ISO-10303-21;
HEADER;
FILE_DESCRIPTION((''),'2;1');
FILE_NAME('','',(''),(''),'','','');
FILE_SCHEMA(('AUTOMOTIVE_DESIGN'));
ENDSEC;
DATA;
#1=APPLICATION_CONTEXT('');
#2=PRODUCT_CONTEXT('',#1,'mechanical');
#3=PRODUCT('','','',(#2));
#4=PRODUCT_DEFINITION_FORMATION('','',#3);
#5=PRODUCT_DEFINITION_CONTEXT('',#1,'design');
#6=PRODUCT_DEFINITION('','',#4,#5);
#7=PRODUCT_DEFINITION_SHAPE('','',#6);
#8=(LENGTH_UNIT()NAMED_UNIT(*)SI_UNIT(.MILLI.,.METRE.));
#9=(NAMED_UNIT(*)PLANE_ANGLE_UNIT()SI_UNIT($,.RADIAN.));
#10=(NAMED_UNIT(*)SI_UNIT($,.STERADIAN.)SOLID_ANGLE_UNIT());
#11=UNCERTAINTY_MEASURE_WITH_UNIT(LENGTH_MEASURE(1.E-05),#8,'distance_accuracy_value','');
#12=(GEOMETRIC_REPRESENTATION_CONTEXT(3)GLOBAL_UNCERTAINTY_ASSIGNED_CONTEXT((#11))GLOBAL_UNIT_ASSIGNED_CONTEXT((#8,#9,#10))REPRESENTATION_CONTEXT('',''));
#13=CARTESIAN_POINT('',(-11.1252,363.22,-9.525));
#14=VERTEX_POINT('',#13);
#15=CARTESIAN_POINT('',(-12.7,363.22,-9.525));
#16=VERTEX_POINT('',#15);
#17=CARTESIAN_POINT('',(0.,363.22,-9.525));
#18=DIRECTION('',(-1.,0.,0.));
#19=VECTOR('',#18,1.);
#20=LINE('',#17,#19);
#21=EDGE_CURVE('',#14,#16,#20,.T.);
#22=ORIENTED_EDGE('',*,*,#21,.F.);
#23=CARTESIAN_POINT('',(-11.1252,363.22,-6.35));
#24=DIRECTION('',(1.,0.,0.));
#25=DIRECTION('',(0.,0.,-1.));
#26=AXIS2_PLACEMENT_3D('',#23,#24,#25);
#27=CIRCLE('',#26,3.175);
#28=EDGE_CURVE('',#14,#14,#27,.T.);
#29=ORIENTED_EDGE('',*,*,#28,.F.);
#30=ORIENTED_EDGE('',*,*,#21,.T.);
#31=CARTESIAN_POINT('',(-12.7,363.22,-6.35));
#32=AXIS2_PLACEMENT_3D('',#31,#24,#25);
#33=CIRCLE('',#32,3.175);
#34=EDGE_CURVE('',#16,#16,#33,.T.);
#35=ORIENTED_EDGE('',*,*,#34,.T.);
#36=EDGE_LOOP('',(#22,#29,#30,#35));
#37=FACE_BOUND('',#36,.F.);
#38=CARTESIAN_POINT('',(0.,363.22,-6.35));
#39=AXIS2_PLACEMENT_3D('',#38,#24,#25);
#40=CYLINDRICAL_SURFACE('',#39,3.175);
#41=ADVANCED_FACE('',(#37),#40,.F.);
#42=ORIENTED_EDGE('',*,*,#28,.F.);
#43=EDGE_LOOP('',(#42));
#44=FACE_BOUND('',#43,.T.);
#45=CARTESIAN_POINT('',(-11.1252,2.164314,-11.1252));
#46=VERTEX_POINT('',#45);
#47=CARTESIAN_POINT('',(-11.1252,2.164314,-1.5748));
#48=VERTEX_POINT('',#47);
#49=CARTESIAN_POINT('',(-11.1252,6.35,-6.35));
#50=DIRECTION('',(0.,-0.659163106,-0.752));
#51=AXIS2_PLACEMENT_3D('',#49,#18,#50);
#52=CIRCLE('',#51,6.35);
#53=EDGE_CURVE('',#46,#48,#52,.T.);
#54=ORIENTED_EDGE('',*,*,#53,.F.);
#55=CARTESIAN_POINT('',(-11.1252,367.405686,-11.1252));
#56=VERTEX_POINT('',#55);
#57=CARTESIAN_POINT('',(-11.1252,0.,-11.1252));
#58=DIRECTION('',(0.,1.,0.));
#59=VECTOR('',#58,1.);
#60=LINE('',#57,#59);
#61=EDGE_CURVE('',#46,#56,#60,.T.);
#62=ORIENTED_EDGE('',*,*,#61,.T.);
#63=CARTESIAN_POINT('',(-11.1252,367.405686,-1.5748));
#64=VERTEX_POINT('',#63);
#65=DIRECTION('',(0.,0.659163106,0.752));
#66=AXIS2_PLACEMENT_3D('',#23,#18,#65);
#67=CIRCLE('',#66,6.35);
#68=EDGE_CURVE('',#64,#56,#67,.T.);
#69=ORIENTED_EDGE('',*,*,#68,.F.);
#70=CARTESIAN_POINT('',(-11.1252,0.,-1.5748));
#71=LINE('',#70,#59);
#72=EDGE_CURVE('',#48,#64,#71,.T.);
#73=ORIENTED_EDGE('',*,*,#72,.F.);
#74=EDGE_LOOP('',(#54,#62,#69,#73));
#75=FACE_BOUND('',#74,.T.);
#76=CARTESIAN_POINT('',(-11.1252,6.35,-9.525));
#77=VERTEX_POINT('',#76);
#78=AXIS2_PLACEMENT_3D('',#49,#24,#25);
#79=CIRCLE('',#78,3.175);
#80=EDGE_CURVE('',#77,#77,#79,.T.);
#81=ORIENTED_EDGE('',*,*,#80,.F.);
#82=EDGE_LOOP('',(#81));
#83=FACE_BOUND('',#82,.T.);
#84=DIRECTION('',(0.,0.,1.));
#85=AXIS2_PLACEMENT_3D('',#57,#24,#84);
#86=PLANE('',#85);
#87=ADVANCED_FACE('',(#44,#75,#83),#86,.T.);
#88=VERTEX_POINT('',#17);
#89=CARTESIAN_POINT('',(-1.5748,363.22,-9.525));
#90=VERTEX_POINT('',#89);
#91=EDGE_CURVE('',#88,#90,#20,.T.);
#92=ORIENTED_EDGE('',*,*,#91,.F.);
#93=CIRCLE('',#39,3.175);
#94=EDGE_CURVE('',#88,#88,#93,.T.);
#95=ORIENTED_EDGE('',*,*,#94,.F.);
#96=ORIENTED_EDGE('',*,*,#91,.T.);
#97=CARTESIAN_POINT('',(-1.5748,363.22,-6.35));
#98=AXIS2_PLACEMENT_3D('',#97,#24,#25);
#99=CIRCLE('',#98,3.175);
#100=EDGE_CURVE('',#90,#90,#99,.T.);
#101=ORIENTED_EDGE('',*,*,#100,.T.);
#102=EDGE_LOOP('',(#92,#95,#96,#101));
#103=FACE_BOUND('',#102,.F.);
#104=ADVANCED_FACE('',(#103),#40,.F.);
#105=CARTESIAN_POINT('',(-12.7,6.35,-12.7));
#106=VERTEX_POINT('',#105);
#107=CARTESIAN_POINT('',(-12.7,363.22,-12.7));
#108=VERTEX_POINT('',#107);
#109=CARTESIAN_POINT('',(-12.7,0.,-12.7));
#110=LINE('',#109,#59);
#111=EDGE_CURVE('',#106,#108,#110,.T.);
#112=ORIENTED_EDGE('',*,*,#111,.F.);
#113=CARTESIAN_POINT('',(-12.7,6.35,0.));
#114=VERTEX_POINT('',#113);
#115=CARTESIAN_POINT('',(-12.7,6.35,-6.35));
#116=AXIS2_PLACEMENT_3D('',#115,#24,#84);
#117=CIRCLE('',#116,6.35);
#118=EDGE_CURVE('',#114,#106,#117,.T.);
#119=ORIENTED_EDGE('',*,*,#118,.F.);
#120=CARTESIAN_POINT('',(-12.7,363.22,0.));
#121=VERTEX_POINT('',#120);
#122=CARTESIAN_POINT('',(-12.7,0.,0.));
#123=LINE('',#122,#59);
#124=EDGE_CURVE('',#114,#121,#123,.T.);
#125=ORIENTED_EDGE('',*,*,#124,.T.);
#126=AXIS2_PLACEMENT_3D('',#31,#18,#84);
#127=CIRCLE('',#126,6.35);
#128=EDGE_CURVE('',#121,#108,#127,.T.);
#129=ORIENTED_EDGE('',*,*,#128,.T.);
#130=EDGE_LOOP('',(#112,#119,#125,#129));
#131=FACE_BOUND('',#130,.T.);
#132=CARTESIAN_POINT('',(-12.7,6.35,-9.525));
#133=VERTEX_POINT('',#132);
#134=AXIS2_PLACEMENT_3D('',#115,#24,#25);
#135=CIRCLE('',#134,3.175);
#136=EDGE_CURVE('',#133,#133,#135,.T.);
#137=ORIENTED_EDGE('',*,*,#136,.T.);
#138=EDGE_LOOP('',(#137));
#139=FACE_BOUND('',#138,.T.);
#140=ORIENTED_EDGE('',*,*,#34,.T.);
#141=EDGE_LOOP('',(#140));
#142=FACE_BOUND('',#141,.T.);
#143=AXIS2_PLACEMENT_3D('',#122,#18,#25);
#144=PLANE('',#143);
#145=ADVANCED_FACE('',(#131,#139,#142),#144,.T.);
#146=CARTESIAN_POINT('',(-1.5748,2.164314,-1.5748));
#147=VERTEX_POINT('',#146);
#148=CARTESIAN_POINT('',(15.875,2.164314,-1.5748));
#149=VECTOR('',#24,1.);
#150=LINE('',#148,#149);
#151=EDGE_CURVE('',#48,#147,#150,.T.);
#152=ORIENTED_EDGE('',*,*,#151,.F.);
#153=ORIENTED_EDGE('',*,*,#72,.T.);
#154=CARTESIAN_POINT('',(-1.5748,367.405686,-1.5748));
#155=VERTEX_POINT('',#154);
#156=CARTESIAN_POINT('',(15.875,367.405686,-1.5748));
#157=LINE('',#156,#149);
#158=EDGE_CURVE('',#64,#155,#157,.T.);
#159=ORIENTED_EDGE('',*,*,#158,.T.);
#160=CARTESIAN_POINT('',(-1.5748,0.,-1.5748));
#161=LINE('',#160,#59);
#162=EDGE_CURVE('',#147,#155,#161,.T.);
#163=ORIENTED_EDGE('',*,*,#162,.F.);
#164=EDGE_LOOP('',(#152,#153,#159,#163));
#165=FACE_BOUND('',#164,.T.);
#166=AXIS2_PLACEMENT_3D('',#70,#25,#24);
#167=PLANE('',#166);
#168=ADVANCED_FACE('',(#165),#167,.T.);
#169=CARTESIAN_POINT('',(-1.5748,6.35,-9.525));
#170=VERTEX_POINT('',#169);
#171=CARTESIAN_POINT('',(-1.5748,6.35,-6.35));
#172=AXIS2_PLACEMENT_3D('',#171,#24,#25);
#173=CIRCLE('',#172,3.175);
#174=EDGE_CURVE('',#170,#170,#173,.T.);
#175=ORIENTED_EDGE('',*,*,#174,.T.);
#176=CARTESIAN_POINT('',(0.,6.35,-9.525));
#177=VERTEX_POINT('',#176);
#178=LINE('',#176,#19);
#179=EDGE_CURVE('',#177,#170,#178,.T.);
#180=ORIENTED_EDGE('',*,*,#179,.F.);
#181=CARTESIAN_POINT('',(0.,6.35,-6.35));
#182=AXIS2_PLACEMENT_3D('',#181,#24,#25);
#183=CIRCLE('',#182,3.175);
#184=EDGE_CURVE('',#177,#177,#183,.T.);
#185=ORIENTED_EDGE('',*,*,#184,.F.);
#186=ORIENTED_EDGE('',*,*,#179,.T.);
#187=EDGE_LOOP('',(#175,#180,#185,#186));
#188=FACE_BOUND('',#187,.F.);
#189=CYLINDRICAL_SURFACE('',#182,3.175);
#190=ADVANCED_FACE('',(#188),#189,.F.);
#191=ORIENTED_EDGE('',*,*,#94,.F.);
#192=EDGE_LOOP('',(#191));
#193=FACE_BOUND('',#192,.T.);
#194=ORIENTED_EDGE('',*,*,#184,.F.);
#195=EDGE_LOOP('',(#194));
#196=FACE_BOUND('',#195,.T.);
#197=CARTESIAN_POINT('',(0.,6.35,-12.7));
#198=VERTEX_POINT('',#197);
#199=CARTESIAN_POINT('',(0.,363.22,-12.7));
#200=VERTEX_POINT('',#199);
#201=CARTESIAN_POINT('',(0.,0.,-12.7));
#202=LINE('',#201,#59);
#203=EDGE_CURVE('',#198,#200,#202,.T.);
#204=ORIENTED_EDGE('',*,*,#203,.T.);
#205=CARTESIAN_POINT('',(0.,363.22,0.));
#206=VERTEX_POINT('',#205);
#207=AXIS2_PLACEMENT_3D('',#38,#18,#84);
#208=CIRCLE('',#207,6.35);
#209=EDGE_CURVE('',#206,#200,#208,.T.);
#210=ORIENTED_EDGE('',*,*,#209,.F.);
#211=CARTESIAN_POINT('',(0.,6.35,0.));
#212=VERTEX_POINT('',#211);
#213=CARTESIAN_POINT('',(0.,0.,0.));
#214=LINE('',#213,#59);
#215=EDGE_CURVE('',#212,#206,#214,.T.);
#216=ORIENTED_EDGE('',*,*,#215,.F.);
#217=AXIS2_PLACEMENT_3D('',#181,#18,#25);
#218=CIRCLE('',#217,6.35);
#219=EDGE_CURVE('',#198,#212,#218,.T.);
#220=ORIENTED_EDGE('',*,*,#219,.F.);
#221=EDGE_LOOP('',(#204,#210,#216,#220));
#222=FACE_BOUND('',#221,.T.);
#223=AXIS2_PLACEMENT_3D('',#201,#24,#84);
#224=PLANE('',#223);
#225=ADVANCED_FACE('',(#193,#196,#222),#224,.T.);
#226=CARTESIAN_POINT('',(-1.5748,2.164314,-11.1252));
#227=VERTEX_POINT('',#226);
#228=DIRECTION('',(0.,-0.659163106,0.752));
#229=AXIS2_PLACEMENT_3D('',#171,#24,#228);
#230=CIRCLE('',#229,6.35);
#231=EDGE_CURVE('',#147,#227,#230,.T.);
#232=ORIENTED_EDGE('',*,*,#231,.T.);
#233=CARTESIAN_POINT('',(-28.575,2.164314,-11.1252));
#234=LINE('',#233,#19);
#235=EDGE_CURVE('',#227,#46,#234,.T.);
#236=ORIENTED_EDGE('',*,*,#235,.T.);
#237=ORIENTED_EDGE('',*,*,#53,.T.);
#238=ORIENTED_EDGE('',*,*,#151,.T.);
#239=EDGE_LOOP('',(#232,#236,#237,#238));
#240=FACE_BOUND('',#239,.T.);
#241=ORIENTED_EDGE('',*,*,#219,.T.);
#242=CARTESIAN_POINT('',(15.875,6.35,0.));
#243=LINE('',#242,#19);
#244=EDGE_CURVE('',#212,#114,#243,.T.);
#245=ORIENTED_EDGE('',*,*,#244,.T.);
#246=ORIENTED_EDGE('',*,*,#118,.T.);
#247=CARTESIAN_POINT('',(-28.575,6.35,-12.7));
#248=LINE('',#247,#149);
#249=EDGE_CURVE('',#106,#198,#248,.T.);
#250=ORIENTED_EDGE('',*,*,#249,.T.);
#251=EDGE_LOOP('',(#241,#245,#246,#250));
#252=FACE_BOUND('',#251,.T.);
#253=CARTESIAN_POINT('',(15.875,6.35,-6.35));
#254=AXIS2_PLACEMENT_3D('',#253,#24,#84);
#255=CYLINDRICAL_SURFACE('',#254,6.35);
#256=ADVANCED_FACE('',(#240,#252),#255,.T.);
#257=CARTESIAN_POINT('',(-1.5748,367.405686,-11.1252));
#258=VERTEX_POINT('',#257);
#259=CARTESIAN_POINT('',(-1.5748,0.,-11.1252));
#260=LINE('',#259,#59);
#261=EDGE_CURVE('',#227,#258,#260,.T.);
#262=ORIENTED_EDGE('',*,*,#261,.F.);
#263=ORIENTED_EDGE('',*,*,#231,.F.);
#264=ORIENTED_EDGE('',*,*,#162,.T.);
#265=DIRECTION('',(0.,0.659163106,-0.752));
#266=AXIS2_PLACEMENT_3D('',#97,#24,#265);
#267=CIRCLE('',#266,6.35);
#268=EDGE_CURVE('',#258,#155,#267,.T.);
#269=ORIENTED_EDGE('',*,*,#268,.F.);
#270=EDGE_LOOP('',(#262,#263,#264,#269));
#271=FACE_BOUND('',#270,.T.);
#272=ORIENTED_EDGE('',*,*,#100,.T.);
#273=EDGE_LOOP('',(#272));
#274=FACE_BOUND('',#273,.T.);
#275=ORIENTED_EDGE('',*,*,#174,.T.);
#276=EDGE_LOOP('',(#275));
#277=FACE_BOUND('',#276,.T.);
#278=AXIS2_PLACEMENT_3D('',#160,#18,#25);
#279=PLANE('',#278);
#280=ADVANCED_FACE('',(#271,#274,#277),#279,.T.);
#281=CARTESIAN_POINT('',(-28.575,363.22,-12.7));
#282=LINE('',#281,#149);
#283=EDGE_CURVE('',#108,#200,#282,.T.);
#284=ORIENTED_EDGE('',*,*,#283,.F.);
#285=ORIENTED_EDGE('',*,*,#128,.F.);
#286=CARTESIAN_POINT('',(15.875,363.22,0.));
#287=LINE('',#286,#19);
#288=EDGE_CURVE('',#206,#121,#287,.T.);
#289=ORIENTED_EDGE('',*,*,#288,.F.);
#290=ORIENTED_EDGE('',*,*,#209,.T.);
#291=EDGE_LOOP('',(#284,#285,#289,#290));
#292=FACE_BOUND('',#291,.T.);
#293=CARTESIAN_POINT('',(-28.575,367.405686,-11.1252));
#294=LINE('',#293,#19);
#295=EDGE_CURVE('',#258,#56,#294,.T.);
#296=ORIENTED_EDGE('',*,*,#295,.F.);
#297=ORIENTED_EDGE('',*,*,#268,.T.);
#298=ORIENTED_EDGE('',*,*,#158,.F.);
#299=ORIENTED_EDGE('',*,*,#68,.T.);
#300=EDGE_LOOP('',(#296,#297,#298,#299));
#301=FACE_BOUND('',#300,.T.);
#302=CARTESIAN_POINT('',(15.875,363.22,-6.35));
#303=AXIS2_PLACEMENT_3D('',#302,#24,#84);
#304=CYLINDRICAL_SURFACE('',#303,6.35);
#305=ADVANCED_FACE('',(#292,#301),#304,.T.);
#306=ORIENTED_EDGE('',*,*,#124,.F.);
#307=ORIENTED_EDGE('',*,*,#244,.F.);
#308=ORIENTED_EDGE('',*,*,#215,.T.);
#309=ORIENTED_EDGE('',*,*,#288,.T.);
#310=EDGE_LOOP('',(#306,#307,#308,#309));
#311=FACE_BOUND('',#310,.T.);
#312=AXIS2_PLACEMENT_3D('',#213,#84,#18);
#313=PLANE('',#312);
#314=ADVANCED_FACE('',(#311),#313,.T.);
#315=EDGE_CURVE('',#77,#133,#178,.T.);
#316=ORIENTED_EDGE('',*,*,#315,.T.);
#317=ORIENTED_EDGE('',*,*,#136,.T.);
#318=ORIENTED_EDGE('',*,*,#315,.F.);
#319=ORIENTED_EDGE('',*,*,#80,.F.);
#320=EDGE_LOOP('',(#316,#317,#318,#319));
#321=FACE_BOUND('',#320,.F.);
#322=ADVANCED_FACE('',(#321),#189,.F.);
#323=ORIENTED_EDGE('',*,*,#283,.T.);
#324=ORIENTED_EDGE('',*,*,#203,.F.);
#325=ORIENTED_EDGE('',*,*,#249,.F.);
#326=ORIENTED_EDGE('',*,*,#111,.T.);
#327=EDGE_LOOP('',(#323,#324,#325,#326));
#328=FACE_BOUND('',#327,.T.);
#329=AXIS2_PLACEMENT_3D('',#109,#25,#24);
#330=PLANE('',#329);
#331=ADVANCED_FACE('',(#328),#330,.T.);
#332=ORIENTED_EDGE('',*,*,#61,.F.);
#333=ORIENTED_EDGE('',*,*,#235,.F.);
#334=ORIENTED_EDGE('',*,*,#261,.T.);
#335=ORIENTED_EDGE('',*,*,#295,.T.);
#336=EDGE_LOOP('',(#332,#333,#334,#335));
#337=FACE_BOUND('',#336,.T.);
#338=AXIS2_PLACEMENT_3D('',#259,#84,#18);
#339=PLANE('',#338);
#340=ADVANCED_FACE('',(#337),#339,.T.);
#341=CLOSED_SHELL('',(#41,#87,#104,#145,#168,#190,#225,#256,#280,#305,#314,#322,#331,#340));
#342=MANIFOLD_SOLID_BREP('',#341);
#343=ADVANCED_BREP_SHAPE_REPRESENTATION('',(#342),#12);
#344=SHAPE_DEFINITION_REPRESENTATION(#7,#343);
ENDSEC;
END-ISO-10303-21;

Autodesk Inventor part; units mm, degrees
ref_plane "YZ Plane" through (0, 0, 0) normal (1, 0, 0) x (0, 1, 0)
ref_plane "XZ Plane" through (0, 0, 0) normal (0, 1, 0) x (-1, 0, 0)
ref_plane "XY Plane" through (0, 0, 0) normal (0, 0, 1) x (1, 0, 0)
sketch "Sketch1" plane through (0, 0, 0) normal (0, 1, 0) x (-1, 0, 0)
  line L0 (0, 0) -> (12.7, 0)
  line L1 (12.7, 0) -> (12.7, -12.7)
  line L2 (12.7, -12.7) -> (0, -12.7)
  line L3 (0, -12.7) -> (0, 0)
  line L4 (11.1252, -1.5748) -> (1.5748, -1.5748)
  line L5 (1.5748, -1.5748) -> (1.5748, -11.1252)
  line L6 (1.5748, -11.1252) -> (11.1252, -11.1252)
  line L7 (11.1252, -11.1252) -> (11.1252, -1.5748)
  line L8 (6.35, -1.5748) -> (6.35, 0) construction
  line L9 (1.5748, -6.35) -> (0, -6.35) construction
  dimension "d0" = 12.7
  dimension "d1" = 1.5748
extrude "Extrusion1" add sketch "Sketch1" along normal blind 369.57
sketch "Sketch2" plane through (0, 0, 0) normal (1, 0, 0) x (0, 0, -1)
  line L0 (0, 0) -> (12.7, 0) construction
  line L1 (6.35, 0) -> (6.35, 369.57) construction
  line L2 (0, 369.57) -> (12.7, 369.57) construction
  line L3 (0, 0) -> (0, 369.57) construction
  line L4 (0, 184.785) -> (12.7, 184.785) construction
  circle A0 centre (6.35, 6.35) radius 3.175
  circle A1 centre (6.35, 363.22) radius 3.175
  dimension "d4" = 6.35
  dimension "d5" = 356.87
extrude "Extrusion2" cut sketch "Sketch2" against normal through all
fillet "Fillet1" radius 6.35 4 edges at (-6.35, 369.57, 0) (-6.35, 369.57, -12.7) (-6.35, 0, 0) (-6.35, 0, -12.7)
properties part number "Tie Rod"
